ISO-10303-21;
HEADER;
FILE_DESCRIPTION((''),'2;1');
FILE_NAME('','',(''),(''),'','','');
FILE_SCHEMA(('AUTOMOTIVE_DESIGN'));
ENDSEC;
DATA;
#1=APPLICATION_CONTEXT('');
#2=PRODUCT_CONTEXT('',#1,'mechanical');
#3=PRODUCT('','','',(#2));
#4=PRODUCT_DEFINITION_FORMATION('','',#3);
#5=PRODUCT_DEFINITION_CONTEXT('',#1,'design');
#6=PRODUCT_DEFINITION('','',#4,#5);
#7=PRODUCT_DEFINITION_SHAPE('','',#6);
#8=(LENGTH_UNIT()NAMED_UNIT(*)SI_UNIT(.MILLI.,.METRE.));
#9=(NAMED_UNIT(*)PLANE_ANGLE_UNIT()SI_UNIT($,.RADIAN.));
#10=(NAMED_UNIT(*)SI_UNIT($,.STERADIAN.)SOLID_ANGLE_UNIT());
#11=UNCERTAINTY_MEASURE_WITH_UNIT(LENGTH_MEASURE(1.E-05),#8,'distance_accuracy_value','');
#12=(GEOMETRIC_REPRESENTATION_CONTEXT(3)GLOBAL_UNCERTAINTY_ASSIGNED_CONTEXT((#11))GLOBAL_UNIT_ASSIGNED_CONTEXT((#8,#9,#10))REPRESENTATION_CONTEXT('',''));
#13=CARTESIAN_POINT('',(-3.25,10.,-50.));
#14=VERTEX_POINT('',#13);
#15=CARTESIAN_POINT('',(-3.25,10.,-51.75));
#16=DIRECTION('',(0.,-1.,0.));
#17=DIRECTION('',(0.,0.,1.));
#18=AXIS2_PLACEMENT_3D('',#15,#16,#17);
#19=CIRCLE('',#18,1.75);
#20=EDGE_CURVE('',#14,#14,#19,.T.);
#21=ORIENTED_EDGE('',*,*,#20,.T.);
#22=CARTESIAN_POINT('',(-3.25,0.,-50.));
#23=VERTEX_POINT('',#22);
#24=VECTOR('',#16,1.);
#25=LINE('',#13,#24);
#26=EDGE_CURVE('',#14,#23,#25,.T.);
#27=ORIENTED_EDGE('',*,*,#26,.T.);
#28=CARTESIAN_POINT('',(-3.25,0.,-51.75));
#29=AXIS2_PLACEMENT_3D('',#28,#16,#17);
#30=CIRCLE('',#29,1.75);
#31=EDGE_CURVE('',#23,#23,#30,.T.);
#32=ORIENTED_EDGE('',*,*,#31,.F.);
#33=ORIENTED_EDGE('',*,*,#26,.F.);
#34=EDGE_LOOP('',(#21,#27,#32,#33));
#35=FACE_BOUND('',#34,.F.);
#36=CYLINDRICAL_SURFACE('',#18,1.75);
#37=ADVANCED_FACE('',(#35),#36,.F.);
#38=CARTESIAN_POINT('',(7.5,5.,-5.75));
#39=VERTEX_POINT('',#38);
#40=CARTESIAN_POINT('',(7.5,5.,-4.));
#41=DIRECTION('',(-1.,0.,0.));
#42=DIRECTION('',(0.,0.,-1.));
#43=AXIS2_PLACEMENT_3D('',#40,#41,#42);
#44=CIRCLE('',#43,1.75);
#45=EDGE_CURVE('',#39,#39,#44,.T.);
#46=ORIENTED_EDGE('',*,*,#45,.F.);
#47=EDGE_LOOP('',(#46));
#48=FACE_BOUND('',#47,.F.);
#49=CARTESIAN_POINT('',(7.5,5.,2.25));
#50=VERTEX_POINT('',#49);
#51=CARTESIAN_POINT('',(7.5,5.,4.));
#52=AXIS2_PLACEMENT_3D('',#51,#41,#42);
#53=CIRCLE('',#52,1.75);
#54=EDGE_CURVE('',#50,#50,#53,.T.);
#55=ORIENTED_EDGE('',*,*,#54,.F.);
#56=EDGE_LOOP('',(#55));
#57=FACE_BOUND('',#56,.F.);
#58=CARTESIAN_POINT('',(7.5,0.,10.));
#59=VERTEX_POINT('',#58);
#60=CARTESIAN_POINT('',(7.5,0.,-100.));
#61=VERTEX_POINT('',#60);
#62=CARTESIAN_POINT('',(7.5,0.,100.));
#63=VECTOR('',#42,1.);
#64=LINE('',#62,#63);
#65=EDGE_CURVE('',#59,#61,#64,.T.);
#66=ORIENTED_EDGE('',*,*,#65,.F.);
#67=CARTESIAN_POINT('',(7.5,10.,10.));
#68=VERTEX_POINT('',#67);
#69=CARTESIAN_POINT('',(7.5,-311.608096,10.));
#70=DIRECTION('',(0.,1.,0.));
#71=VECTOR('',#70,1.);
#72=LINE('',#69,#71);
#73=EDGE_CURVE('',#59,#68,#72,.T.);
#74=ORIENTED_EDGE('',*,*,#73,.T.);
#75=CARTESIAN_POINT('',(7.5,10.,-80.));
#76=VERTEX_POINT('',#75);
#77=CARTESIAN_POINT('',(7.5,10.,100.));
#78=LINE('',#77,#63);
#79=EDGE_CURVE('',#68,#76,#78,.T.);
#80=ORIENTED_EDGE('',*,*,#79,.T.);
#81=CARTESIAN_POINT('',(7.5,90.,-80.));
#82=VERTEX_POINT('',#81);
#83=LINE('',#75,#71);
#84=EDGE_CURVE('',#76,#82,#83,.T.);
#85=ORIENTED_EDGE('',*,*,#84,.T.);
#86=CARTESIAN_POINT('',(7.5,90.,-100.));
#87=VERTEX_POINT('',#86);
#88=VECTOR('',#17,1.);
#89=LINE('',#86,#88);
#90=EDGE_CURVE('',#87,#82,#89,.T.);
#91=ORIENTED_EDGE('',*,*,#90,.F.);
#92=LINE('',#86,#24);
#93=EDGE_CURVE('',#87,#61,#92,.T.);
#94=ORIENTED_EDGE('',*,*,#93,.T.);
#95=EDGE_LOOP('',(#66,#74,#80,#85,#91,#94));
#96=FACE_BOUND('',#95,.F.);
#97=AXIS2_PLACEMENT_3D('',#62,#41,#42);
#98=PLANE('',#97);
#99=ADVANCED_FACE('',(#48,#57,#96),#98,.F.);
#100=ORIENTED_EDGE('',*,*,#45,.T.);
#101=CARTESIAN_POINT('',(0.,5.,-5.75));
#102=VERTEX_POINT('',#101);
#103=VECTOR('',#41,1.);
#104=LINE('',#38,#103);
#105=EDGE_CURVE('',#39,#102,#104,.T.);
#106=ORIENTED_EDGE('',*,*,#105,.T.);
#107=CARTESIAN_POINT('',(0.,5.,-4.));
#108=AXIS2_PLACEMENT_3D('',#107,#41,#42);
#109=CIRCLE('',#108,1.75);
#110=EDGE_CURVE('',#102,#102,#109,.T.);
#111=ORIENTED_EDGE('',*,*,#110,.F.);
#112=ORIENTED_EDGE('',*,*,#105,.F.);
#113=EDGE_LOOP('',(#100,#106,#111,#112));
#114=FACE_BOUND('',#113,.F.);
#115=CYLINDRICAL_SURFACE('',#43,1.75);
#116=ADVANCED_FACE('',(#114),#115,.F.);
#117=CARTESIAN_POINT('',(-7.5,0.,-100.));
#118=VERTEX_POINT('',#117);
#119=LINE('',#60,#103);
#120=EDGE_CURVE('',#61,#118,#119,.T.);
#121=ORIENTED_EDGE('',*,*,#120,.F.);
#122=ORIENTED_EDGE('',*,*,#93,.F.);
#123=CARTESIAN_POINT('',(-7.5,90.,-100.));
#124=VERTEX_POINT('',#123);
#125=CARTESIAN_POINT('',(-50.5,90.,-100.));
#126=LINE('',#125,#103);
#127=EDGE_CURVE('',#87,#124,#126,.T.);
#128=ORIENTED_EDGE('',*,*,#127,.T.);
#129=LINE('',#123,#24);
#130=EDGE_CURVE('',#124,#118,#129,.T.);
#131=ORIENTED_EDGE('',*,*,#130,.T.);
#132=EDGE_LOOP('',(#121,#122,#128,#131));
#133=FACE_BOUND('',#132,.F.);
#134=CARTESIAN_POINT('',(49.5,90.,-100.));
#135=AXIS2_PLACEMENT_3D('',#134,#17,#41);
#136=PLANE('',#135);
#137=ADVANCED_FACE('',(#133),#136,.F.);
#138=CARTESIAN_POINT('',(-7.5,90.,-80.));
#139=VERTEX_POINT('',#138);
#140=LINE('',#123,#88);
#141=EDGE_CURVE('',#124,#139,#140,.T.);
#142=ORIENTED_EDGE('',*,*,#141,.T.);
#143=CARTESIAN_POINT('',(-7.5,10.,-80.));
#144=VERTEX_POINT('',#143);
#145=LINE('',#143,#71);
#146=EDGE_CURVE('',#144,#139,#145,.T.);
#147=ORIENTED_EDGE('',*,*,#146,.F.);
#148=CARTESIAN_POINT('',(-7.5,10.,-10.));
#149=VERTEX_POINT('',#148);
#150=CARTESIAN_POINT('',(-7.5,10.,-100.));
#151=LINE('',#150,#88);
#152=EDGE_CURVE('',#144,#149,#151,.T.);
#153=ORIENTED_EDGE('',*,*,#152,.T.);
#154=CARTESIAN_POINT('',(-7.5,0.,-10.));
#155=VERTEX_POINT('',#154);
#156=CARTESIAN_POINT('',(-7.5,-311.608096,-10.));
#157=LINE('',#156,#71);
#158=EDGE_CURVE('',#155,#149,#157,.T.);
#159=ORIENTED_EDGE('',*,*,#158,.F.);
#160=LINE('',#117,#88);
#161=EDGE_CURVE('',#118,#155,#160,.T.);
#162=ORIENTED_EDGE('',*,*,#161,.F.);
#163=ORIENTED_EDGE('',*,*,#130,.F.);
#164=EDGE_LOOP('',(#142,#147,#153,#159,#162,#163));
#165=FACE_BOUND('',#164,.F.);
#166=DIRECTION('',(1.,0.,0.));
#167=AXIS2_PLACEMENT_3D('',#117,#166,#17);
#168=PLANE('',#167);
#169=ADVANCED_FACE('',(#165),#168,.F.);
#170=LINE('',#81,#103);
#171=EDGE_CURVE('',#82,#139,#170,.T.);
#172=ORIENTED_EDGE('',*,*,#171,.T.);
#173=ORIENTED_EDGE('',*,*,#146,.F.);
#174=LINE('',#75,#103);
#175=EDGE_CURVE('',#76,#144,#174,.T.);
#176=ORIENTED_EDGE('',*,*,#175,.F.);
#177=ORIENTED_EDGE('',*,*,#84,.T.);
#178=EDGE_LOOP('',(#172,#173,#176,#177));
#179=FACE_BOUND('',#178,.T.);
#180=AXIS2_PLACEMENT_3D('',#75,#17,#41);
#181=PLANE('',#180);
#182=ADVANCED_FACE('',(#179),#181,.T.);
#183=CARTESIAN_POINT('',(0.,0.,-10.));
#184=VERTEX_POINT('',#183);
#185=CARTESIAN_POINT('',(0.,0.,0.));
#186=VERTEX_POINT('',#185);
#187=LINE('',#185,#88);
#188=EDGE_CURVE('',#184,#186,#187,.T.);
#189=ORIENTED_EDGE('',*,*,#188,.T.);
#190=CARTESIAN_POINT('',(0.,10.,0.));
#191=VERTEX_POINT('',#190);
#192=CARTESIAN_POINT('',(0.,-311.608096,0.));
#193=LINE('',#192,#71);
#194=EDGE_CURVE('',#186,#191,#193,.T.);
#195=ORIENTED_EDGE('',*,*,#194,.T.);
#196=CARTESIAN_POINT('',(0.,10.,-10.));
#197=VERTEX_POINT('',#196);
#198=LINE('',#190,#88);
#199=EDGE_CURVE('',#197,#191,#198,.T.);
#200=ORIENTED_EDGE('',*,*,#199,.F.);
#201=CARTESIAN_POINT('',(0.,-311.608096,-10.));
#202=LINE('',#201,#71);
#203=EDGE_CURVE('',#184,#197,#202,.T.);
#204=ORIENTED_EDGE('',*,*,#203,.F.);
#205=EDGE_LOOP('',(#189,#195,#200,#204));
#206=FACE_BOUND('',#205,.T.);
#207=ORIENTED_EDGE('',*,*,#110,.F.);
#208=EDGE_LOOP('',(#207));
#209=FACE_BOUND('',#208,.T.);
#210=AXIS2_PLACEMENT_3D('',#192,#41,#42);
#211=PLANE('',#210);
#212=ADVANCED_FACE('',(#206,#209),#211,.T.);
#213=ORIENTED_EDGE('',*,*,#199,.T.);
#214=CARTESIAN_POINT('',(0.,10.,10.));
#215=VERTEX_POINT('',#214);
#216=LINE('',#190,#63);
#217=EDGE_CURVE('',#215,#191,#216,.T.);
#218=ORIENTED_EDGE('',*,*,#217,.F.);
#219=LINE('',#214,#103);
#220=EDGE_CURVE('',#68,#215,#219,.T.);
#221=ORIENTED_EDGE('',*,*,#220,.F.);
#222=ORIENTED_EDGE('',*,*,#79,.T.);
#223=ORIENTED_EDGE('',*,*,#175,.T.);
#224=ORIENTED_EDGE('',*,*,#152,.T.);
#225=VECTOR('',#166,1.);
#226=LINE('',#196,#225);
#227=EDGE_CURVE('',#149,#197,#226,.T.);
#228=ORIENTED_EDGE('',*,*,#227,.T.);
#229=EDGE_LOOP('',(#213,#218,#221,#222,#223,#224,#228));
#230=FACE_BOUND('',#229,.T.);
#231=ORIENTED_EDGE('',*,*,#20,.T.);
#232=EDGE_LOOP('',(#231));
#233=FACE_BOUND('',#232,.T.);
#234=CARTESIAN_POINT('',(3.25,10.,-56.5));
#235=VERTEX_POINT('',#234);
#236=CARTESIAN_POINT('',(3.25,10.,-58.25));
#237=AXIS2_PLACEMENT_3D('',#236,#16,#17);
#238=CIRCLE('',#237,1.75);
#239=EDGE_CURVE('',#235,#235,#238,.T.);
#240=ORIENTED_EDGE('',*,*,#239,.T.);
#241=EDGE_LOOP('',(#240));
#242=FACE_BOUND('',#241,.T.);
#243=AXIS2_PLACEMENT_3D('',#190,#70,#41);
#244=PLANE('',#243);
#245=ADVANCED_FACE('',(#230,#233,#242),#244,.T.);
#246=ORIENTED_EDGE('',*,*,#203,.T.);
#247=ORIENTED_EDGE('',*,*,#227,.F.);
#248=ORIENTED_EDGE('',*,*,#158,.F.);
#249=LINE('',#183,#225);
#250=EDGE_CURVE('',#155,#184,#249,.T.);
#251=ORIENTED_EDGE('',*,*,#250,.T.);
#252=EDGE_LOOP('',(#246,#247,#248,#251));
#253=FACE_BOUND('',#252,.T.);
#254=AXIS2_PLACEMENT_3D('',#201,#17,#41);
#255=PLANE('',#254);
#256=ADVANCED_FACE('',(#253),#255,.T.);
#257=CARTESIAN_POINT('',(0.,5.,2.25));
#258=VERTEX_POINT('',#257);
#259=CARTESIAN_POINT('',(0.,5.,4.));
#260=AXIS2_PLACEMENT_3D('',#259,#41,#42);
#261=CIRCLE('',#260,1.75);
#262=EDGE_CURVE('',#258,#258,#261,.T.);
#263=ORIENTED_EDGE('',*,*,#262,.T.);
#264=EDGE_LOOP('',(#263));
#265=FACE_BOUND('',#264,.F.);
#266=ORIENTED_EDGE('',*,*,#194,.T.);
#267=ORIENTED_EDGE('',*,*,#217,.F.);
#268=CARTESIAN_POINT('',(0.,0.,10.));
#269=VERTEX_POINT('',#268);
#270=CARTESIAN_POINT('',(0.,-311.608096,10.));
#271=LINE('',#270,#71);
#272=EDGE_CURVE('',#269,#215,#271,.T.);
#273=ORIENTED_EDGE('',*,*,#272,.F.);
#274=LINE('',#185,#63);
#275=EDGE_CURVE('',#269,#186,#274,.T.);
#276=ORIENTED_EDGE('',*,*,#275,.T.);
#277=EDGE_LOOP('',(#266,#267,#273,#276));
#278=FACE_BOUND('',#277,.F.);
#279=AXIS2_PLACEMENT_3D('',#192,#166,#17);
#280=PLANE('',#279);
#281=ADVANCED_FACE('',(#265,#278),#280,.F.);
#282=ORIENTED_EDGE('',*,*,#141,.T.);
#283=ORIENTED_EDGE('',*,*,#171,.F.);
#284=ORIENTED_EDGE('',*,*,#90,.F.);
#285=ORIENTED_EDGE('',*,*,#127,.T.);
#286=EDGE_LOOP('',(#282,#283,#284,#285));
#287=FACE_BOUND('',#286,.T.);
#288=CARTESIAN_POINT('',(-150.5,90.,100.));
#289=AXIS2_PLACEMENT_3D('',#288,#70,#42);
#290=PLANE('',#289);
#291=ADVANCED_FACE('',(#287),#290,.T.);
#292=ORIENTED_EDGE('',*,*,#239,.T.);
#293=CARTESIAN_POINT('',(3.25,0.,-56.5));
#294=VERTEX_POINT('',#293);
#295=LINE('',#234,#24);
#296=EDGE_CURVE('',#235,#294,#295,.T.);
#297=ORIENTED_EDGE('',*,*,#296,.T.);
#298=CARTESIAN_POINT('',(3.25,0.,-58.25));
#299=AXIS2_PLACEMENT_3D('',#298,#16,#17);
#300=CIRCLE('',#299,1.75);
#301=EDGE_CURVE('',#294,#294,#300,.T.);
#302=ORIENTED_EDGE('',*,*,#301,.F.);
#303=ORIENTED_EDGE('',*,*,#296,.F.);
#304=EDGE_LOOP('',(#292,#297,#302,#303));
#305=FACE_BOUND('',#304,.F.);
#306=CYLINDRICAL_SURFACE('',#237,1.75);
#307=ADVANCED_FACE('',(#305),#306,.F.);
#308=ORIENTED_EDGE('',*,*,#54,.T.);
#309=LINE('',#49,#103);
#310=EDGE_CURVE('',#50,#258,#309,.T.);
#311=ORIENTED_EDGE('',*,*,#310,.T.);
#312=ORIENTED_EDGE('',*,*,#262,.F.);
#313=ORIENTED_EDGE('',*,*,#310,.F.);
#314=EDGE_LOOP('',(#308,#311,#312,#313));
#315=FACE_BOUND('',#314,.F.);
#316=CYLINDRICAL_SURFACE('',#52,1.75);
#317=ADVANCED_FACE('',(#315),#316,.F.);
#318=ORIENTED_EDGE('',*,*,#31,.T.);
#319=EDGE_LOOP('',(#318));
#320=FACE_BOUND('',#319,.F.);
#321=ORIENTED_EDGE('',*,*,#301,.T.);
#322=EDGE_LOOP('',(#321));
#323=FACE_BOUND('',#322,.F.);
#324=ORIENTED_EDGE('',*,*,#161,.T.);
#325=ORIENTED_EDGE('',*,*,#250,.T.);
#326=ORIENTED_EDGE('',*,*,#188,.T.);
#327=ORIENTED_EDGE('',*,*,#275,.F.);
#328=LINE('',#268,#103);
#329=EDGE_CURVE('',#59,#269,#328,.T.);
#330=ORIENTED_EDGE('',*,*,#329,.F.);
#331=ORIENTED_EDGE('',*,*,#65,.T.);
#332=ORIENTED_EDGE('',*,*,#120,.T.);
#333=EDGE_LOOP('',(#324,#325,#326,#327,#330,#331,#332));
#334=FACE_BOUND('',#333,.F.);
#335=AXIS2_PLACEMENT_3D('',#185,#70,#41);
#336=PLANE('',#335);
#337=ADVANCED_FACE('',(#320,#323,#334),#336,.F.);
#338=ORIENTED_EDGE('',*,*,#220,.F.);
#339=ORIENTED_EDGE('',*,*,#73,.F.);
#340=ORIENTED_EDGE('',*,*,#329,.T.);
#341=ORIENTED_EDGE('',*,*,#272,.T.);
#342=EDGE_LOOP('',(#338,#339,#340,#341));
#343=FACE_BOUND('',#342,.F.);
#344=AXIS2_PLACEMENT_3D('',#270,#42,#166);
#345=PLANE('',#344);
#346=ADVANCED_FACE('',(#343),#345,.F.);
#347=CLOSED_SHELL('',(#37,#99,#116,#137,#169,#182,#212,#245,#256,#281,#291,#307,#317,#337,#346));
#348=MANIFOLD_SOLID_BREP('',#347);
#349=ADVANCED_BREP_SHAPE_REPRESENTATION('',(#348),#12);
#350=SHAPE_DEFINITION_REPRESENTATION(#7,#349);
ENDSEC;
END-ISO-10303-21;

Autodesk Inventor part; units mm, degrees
ref_plane "YZ Plane" through (0, 0, 0) normal (1, 0, 0) x (0, 1, 0)
ref_plane "XZ Plane" through (0, 0, 0) normal (0, 1, 0) x (-1, 0, 0)
ref_plane "XY Plane" through (0, 0, 0) normal (0, 0, 1) x (1, 0, 0)
sketch "Boceto2" plane through (0, 0, 0) normal (0, 1, 0) x (-1, 0, 0)
  line L0 (7.5, 100) -> (-7.5, 100)
  line L1 (-7.5, 100) -> (-7.5, -100)
  line L2 (-7.5, -100) -> (7.5, -100)
  line L3 (7.5, -100) -> (7.5, 100)
  line L4 (7.5, 100) -> (-7.5, -100) construction
  line L5 (-7.5, 100) -> (7.5, -100) construction
  point P0 (0, 0)
  dimension "d7" = 15
  dimension "d8" = 200
extrude "Extrusión1" add sketch "Boceto2" along normal blind 10
sketch "Boceto3" plane through (0, 10, 0) normal (0, 1, 0) x (1, 0, 0)
  circle A0 centre (3.25, 58.25) radius 1.75
  line L0 (5, 50) -> (-5, 50)
  line L1 (-5, 50) -> (-5, 60)
  line L2 (-5, 60) -> (5, 60)
  line L3 (5, 60) -> (5, 50)
  line L4 (5, 50) -> (-5, 60) construction
  line L5 (-5, 50) -> (5, 60) construction
  circle A1 centre (-3.25, 51.75) radius 1.75
  line L6 (7.5, 100) -> (-7.5, 100) projected
  line L7 (-7.5, 0) -> (3.408, 0)
  line L8 (5, -60) -> (5, -50)
  line L9 (-5, -60) -> (5, -60)
  line L10 (5, -50) -> (-5, -50)
  line L11 (-5, -50) -> (-5, -60)
  line L12 (-5, -50) -> (5, -60) construction
  circle A2 centre (-3.25, -51.75) radius 1.75
  line L13 (5, -50) -> (-5, -60) construction
  circle A3 centre (3.25, -58.25) radius 1.75
  line L14 (-7.5, -100) -> (7.5, -100) projected
  point P0 (0, 0)
  point P1 (-5, 55)
  point P2 (0, 100)
  point P3 (-5, -55)
  dimension "d11" = 3.5
  dimension "d12" = 1.75
  dimension "d13" = 1.75
  dimension "d14" = 1.75
  dimension "d15" = 1.75
  dimension "d16" = 10
  dimension "d17" = 10
  dimension "d19" = 40
  dimension "d81" = 40
hole "Agujero1" at (3.25, 10, 58.25) at (-3.25, 10, 51.75) at (3.25, 10, -58.25) at (-3.25, 10, -51.75) direction (0, -1, 0) diameter 3.5 end through all
sketch "Boceto4" plane through (0, 10, 0) normal (0, 1, 0) x (1, 0, 0)
  line L0 (-7.5, 100) -> (-7.5, -100) projected
  line L1 (-7.5, -100) -> (7.5, -100)
  line L2 (7.5, -100) -> (7.5, -80)
  line L3 (7.5, -80) -> (-7.5, -80)
  line L4 (-7.5, -80) -> (-7.5, -100)
  line L5 (-7.5, 0) -> (1.0116, 0)
  line L6 (-7.5, -100) -> (-7.5, 100)
  line L7 (-7.5, 100) -> (7.5, 100)
  line L8 (7.5, 100) -> (7.5, 80)
  line L9 (7.5, 80) -> (-7.5, 80)
  line L10 (-7.5, 80) -> (-7.5, 100)
  point P0 (0, 0)
  point P1 (-7.5, -80)
  point P2 (-7.5, 80)
  dimension "d27" = 15
  dimension "d28" = 20
extrude "Extrusión2" add sketch "Boceto4" along normal blind 80
sketch "Boceto5" plane through (0, 90, 0) normal (0, 1, 0) x (1, 0, 0)
  line L0 (-7.5, -100) -> (7.5, -100) projected
  line L1 (-7.5, -100) -> (49.5, -100)
  line L2 (49.5, -100) -> (49.5, 100)
  line L3 (49.5, 100) -> (-7.5, 100)
  line L4 (-7.5, 100) -> (-7.5, -100)
  line L5 (49.5, -100) -> (-150.5, -100)
  line L6 (-150.5, -100) -> (-150.5, 100)
  line L7 (-150.5, 100) -> (49.5, 100)
  line L8 (49.5, 100) -> (49.5, -100)
  point P0 (0, 0)
  point P1 (-7.5, 100)
  dimension "d31" = 57
  dimension "d32" = 200
  dimension "d75" = 200
extrude "Extrusión3" add sketch "Boceto5" along normal blind 110
sketch "Boceto6" plane through (0, 200, 0) normal (0, 1, 0) x (1, 0, 0)
  line L0 (49.5, 100) -> (7.5, 100) projected
  line L1 (49.5, 100) -> (29.5, 100)
  line L2 (29.5, 100) -> (29.5, 80)
  line L3 (7.5, -100) -> (49.5, -100) projected
  line L4 (28.5, -100) -> (28.5, -80)
  line L5 (-150.5, 100) -> (-150.5, -100) projected
  line L6 (29.5, 80) -> (-150.5, 80)
  line L7 (-150.5, 80) -> (-150.5, -80)
  line L8 (-150.5, -80) -> (29.5, -80)
  line L9 (29.5, -80) -> (29.5, 80)
  line L10 (-150.5, -100) -> (49.5, -100) projected
  point P0 (7.5, 80)
  point P1 (-50.5, -100)
  dimension "d36" = 20
  dimension "d37" = 20
  dimension "d38" = 20
  dimension "d77" = 20
extrude "Extrusión4" cut sketch "Boceto6" against normal blind 90 contours L8 L5 L6 L9
sketch "Boceto7" plane through (-150.5, 90, -100) normal (-1, 0, 0) x (0, 0, 1)
  line L0 (0, 110) -> (20, 110) projected
  line L1 (20, 110) -> (10, 110)
  line L2 (10, 110) -> (10, 20)
  line L3 (10, 20) -> (20, 20)
  line L4 (20, 20) -> (20, 110)
  line L5 (180, 110) -> (180, 20) projected
  line L6 (180, 110) -> (190, 110)
  line L7 (190, 110) -> (190, 20)
  line L8 (190, 20) -> (180, 20)
  line L9 (180, 20) -> (180, 110)
  line L10 (200, 0) -> (200, 110) projected
  line L11 (0, 0) -> (0, 110) projected
  line L12 (0, 110) -> (10, 110)
  line L13 (10, 110) -> (10, 20)
  line L14 (10, 20) -> (0, 20)
  line L15 (0, 20) -> (0, 110)
  line L16 (200, 110) -> (0, 110) projected
  line L17 (200, 110) -> (190, 110)
  line L18 (190, 110) -> (190, 20)
  line L19 (190, 20) -> (200, 20)
  line L20 (200, 20) -> (200, 110)
  point P0 (100, -90)
  dimension "d63" = 10
  dimension "d65" = 10
  dimension "d76" = 10
extrude "Extrusión5" cut sketch "Boceto7" against normal blind 30 contours L0 L4 L3 L2 | L6 L7 L8 L5
sketch "Boceto8" plane through (-7.5, 0, 100) normal (0, 0, 1) x (1, 0, 0)
  line L0 (-113, 110) -> (-113, 200) projected
  line L1 (-113, 200) -> (-113, 110)
  circle A0 centre (-124.75, 183.25) radius 1.75
  line L2 (-123, 175) -> (-133, 175)
  line L3 (-133, 175) -> (-133, 185)
  line L4 (-133, 185) -> (-123, 185)
  line L5 (-123, 185) -> (-123, 175)
  line L6 (-123, 175) -> (-133, 185) construction
  line L7 (-133, 175) -> (-123, 185) construction
  circle A1 centre (-131.25, 176.75) radius 1.75
  line L8 (-143, 200) -> (57, 200) projected
  line L9 (-143, 90) -> (-143, 200) projected
  line L10 (-113, 155) -> (-128, 155)
  line L11 (-123, 125) -> (-123, 135)
  line L12 (-133, 125) -> (-123, 125)
  line L13 (-123, 135) -> (-133, 125) construction
  line L14 (-123, 135) -> (-133, 135)
  line L15 (-133, 135) -> (-123, 125) construction
  circle A2 centre (-131.25, 133.25) radius 1.75
  line L16 (-133, 135) -> (-133, 125)
  circle A3 centre (-124.75, 126.75) radius 1.75
  line L17 (-143, 110) -> (-113, 110) projected
  point P0 (7.5, 0)
  point P1 (-133, 180)
  point P2 (-123, 180)
  point P3 (-133, 130)
  point P4 (-123, 130)
  dimension "d45" = 3.5
  dimension "d46" = 1.75
  dimension "d47" = 1.75
  dimension "d48" = 1.75
  dimension "d49" = 1.75
  dimension "d50" = 10
  dimension "d51" = 10
  dimension "d52" = 15
  dimension "d53" = 10
  dimension "d54" = 10
  dimension "d55" = 15
hole "Agujero2" at (-132.25, 183.25, 100) at (-138.75, 176.75, 100) at (-138.75, 133.25, 100) at (-132.25, 126.75, 100) direction (0, 0, -1) diameter 3.5 end through all
ref_plane "Plano de trabajo1" through (-150.5, 90, 100) normal (0, -1, 0) x (1, 0, 0)
split "Dividir1" plane through (-150.5, 90, 100) removes the side toward (0, 1, 0)
ref_plane "Plano de trabajo2" through (-7.5, 10, 0) normal (0, 0, 1) x (1, 0, 0)
sketch "Boceto9" plane through (7.5, 0, 100) normal (1, 0, 0) x (0, 0, -1)
  circle A0 centre (96, 5) radius 1.75
  circle A1 centre (104, 5) radius 1.75
  point P0 (100, 0)
  point P1 (100, 0)
  dimension "d89" = 3.5
hole "Agujero3" at (7.5, 5, 4) at (7.5, 5, -4) direction (-1, 0, 0) diameter 3.5 end through all
sketch "Boceto10" plane through (0, 10, 0) normal (0, 1, 0) x (1, 0, 0)
  line L0 (0, 0) -> (0, -10)
  line L1 (0, -10) -> (7.5, -10)
  line L2 (7.5, -80) -> (7.5, 80) projected
  line L3 (0, 0) -> (0, 10)
  line L4 (0, 10) -> (-7.5, 10)
  line L5 (-7.5, 80) -> (-7.5, -80) projected
  dimension "d97" = 10
  dimension "d98" = 10
split body "Dividir2" sketch "Boceto10" result one side removed curves L1 L0 L3 L4 removed pieces at (-7, 33.3333, 93.3333)
properties part number "container_front_foot_2"
